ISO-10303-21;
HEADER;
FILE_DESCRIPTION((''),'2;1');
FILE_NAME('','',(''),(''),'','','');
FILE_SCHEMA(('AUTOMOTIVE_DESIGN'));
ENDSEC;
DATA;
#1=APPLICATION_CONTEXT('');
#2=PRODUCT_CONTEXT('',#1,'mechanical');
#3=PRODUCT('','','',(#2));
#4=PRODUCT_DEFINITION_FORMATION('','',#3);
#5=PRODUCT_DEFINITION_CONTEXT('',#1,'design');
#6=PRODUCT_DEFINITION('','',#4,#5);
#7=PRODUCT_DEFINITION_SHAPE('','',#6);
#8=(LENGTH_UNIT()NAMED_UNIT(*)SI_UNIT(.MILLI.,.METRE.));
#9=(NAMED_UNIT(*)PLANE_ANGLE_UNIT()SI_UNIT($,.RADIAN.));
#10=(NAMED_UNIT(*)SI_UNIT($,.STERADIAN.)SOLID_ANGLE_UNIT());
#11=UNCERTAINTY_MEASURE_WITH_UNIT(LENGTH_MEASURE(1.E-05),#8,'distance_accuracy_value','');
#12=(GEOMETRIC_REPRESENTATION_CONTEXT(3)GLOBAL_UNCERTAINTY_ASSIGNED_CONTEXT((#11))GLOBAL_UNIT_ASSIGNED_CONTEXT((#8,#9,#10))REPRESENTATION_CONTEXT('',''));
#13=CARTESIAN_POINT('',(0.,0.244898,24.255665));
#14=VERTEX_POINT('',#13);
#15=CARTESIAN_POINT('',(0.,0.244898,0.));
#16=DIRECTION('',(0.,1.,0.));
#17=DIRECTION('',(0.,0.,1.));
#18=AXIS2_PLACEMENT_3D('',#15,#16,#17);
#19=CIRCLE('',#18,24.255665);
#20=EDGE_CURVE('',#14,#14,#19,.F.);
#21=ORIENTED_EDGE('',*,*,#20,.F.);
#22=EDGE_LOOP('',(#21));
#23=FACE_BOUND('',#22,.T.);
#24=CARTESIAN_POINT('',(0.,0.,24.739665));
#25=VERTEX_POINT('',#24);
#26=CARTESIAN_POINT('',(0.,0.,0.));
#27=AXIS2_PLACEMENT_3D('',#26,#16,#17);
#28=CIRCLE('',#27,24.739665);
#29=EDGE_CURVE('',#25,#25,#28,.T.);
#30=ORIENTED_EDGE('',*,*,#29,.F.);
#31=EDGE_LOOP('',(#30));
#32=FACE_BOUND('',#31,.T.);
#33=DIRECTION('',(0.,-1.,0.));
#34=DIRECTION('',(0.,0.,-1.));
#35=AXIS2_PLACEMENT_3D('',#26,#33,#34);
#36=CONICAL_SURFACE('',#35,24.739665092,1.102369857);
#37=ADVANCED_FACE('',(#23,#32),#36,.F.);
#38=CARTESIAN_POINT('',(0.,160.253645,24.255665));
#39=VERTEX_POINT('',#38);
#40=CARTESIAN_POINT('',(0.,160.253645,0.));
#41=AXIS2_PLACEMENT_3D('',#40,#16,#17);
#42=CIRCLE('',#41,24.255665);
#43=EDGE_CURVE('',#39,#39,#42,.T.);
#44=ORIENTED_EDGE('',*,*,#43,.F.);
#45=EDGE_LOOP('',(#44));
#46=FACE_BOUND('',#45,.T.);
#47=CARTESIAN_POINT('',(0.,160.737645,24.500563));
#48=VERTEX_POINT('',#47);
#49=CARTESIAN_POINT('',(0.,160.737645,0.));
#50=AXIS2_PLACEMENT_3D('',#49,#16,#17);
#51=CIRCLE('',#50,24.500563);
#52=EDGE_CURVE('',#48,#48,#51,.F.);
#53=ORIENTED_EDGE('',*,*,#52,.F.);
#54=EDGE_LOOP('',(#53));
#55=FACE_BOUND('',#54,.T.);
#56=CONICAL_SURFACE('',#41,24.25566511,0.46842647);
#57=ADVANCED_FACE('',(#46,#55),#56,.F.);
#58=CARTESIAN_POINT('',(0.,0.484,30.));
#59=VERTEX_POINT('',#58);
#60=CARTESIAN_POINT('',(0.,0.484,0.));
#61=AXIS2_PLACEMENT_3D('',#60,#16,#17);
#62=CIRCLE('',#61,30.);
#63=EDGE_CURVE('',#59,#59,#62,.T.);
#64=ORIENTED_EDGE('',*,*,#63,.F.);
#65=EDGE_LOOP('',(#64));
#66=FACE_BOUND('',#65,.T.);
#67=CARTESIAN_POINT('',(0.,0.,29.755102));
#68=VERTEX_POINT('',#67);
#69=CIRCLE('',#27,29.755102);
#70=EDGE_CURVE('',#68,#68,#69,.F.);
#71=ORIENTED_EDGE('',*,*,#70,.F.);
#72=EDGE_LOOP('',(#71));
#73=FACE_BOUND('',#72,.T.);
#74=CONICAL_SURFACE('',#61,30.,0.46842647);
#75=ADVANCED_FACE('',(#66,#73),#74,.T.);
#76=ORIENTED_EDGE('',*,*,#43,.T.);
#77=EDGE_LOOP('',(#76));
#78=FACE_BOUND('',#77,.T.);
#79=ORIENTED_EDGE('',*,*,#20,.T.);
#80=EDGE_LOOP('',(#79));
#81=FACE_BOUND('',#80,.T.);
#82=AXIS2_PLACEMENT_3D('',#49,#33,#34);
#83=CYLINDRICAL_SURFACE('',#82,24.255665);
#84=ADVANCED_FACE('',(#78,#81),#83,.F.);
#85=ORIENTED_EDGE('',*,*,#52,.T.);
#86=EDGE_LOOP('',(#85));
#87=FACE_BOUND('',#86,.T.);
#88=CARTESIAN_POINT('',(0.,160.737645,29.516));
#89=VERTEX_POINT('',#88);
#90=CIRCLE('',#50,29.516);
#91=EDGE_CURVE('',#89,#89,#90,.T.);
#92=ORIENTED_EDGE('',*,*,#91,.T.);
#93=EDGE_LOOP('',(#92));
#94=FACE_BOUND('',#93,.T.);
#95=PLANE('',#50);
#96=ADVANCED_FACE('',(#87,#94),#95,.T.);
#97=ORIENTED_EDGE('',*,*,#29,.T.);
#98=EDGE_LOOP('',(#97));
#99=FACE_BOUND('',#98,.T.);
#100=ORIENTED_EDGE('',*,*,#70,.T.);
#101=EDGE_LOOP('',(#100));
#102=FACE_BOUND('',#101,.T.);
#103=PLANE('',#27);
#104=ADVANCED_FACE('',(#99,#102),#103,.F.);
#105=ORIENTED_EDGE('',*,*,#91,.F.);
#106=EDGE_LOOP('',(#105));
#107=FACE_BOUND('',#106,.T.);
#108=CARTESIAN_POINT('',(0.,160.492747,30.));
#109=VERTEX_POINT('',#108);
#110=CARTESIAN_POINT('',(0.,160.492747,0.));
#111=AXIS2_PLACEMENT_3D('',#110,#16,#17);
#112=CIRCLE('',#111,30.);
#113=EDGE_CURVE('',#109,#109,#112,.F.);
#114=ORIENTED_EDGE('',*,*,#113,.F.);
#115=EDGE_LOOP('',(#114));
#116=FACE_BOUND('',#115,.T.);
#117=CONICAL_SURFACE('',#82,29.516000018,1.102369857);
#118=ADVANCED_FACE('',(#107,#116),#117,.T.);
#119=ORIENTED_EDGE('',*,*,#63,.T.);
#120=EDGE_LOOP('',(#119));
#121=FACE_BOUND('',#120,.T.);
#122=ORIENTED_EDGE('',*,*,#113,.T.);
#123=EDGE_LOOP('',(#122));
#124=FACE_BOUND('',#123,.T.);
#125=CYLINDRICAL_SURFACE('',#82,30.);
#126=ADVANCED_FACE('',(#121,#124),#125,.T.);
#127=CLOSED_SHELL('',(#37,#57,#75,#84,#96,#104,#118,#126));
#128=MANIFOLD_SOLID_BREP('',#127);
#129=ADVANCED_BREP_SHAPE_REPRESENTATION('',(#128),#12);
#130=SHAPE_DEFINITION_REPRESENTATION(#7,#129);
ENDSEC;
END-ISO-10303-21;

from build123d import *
from OCP.BRepFilletAPI import BRepFilletAPI_MakeChamfer

# Parameters (mm, degrees)
SKETCH1_R           = 30
BOSS_EXTRUDE1_DEPTH = 160.737644982
SKETCH2_R           = 24.25566511
CUT_EXTRUDE1_DEPTH  = 167.24256529
CHAMFER1_SIZE       = 0.244898149
CHAMFER1_SIZE2      = 0.483999982


with BuildPart() as part:
    # Sketch1 → Boss-Extrude1 (new body)
    with BuildSketch(Plane(origin=(0, 0, 0), x_dir=(1, 0, 0), z_dir=(0, 1, 0))):
        Circle(SKETCH1_R)
    extrude(amount=BOSS_EXTRUDE1_DEPTH)

    # Sketch2 → Cut-Extrude1 (cut, through all)
    with BuildSketch(Plane(origin=(0, 0, 0), x_dir=(1, 0, 0), z_dir=(0, 1, 0))):
        Circle(SKETCH2_R)
    extrude(amount=CUT_EXTRUDE1_DEPTH, mode=Mode.SUBTRACT)

    # Chamfer1: one chamfer whose edges measure the first distance from different faces: ONE call of the kernel's chamfer builder (chamfer() names one face for all edges)
    chamfer1_edges_1 = [part.edges().sort_by_distance(p)[0] for p in [
        (-24.25566511, 160.737644982, 0),
    ]]
    chamfer1_side_1 = [part.faces().sort_by_distance(p)[0] for p in [
        (-29.151471863, 160.737644982, 0),
    ]]
    chamfer1_edges_2 = [part.edges().sort_by_distance(p)[0] for p in [
        (-24.25566511, 0, 0),
    ]]
    chamfer1_side_2 = [part.faces().sort_by_distance(p)[0] for p in [
        (-24.25566511, 80.368822491, 0),
    ]]
    chamfer1_edges_3 = [part.edges().sort_by_distance(p)[0] for p in [
        (-30, 0, 0),
    ]]
    chamfer1_side_3 = [part.faces().sort_by_distance(p)[0] for p in [
        (-29.151471863, 0, 0),
    ]]
    chamfer1_edges_4 = [part.edges().sort_by_distance(p)[0] for p in [
        (-30, 160.737644982, 0),
    ]]
    chamfer1_side_4 = [part.faces().sort_by_distance(p)[0] for p in [
        (-30, 80.368822491, 0),
    ]]
    chamfer1 = BRepFilletAPI_MakeChamfer(part.part.solid().wrapped)
    for e in chamfer1_edges_1:
        chamfer1.Add(CHAMFER1_SIZE, CHAMFER1_SIZE2, e.wrapped, chamfer1_side_1[0].wrapped)  # the first distance lies on this face
    for e in chamfer1_edges_2:
        chamfer1.Add(CHAMFER1_SIZE, CHAMFER1_SIZE2, e.wrapped, chamfer1_side_2[0].wrapped)  # the first distance lies on this face
    for e in chamfer1_edges_3:
        chamfer1.Add(CHAMFER1_SIZE, CHAMFER1_SIZE2, e.wrapped, chamfer1_side_3[0].wrapped)  # the first distance lies on this face
    for e in chamfer1_edges_4:
        chamfer1.Add(CHAMFER1_SIZE, CHAMFER1_SIZE2, e.wrapped, chamfer1_side_4[0].wrapped)  # the first distance lies on this face
    add(Compound.cast(chamfer1.Shape()), mode=Mode.REPLACE)


solid = part.part
